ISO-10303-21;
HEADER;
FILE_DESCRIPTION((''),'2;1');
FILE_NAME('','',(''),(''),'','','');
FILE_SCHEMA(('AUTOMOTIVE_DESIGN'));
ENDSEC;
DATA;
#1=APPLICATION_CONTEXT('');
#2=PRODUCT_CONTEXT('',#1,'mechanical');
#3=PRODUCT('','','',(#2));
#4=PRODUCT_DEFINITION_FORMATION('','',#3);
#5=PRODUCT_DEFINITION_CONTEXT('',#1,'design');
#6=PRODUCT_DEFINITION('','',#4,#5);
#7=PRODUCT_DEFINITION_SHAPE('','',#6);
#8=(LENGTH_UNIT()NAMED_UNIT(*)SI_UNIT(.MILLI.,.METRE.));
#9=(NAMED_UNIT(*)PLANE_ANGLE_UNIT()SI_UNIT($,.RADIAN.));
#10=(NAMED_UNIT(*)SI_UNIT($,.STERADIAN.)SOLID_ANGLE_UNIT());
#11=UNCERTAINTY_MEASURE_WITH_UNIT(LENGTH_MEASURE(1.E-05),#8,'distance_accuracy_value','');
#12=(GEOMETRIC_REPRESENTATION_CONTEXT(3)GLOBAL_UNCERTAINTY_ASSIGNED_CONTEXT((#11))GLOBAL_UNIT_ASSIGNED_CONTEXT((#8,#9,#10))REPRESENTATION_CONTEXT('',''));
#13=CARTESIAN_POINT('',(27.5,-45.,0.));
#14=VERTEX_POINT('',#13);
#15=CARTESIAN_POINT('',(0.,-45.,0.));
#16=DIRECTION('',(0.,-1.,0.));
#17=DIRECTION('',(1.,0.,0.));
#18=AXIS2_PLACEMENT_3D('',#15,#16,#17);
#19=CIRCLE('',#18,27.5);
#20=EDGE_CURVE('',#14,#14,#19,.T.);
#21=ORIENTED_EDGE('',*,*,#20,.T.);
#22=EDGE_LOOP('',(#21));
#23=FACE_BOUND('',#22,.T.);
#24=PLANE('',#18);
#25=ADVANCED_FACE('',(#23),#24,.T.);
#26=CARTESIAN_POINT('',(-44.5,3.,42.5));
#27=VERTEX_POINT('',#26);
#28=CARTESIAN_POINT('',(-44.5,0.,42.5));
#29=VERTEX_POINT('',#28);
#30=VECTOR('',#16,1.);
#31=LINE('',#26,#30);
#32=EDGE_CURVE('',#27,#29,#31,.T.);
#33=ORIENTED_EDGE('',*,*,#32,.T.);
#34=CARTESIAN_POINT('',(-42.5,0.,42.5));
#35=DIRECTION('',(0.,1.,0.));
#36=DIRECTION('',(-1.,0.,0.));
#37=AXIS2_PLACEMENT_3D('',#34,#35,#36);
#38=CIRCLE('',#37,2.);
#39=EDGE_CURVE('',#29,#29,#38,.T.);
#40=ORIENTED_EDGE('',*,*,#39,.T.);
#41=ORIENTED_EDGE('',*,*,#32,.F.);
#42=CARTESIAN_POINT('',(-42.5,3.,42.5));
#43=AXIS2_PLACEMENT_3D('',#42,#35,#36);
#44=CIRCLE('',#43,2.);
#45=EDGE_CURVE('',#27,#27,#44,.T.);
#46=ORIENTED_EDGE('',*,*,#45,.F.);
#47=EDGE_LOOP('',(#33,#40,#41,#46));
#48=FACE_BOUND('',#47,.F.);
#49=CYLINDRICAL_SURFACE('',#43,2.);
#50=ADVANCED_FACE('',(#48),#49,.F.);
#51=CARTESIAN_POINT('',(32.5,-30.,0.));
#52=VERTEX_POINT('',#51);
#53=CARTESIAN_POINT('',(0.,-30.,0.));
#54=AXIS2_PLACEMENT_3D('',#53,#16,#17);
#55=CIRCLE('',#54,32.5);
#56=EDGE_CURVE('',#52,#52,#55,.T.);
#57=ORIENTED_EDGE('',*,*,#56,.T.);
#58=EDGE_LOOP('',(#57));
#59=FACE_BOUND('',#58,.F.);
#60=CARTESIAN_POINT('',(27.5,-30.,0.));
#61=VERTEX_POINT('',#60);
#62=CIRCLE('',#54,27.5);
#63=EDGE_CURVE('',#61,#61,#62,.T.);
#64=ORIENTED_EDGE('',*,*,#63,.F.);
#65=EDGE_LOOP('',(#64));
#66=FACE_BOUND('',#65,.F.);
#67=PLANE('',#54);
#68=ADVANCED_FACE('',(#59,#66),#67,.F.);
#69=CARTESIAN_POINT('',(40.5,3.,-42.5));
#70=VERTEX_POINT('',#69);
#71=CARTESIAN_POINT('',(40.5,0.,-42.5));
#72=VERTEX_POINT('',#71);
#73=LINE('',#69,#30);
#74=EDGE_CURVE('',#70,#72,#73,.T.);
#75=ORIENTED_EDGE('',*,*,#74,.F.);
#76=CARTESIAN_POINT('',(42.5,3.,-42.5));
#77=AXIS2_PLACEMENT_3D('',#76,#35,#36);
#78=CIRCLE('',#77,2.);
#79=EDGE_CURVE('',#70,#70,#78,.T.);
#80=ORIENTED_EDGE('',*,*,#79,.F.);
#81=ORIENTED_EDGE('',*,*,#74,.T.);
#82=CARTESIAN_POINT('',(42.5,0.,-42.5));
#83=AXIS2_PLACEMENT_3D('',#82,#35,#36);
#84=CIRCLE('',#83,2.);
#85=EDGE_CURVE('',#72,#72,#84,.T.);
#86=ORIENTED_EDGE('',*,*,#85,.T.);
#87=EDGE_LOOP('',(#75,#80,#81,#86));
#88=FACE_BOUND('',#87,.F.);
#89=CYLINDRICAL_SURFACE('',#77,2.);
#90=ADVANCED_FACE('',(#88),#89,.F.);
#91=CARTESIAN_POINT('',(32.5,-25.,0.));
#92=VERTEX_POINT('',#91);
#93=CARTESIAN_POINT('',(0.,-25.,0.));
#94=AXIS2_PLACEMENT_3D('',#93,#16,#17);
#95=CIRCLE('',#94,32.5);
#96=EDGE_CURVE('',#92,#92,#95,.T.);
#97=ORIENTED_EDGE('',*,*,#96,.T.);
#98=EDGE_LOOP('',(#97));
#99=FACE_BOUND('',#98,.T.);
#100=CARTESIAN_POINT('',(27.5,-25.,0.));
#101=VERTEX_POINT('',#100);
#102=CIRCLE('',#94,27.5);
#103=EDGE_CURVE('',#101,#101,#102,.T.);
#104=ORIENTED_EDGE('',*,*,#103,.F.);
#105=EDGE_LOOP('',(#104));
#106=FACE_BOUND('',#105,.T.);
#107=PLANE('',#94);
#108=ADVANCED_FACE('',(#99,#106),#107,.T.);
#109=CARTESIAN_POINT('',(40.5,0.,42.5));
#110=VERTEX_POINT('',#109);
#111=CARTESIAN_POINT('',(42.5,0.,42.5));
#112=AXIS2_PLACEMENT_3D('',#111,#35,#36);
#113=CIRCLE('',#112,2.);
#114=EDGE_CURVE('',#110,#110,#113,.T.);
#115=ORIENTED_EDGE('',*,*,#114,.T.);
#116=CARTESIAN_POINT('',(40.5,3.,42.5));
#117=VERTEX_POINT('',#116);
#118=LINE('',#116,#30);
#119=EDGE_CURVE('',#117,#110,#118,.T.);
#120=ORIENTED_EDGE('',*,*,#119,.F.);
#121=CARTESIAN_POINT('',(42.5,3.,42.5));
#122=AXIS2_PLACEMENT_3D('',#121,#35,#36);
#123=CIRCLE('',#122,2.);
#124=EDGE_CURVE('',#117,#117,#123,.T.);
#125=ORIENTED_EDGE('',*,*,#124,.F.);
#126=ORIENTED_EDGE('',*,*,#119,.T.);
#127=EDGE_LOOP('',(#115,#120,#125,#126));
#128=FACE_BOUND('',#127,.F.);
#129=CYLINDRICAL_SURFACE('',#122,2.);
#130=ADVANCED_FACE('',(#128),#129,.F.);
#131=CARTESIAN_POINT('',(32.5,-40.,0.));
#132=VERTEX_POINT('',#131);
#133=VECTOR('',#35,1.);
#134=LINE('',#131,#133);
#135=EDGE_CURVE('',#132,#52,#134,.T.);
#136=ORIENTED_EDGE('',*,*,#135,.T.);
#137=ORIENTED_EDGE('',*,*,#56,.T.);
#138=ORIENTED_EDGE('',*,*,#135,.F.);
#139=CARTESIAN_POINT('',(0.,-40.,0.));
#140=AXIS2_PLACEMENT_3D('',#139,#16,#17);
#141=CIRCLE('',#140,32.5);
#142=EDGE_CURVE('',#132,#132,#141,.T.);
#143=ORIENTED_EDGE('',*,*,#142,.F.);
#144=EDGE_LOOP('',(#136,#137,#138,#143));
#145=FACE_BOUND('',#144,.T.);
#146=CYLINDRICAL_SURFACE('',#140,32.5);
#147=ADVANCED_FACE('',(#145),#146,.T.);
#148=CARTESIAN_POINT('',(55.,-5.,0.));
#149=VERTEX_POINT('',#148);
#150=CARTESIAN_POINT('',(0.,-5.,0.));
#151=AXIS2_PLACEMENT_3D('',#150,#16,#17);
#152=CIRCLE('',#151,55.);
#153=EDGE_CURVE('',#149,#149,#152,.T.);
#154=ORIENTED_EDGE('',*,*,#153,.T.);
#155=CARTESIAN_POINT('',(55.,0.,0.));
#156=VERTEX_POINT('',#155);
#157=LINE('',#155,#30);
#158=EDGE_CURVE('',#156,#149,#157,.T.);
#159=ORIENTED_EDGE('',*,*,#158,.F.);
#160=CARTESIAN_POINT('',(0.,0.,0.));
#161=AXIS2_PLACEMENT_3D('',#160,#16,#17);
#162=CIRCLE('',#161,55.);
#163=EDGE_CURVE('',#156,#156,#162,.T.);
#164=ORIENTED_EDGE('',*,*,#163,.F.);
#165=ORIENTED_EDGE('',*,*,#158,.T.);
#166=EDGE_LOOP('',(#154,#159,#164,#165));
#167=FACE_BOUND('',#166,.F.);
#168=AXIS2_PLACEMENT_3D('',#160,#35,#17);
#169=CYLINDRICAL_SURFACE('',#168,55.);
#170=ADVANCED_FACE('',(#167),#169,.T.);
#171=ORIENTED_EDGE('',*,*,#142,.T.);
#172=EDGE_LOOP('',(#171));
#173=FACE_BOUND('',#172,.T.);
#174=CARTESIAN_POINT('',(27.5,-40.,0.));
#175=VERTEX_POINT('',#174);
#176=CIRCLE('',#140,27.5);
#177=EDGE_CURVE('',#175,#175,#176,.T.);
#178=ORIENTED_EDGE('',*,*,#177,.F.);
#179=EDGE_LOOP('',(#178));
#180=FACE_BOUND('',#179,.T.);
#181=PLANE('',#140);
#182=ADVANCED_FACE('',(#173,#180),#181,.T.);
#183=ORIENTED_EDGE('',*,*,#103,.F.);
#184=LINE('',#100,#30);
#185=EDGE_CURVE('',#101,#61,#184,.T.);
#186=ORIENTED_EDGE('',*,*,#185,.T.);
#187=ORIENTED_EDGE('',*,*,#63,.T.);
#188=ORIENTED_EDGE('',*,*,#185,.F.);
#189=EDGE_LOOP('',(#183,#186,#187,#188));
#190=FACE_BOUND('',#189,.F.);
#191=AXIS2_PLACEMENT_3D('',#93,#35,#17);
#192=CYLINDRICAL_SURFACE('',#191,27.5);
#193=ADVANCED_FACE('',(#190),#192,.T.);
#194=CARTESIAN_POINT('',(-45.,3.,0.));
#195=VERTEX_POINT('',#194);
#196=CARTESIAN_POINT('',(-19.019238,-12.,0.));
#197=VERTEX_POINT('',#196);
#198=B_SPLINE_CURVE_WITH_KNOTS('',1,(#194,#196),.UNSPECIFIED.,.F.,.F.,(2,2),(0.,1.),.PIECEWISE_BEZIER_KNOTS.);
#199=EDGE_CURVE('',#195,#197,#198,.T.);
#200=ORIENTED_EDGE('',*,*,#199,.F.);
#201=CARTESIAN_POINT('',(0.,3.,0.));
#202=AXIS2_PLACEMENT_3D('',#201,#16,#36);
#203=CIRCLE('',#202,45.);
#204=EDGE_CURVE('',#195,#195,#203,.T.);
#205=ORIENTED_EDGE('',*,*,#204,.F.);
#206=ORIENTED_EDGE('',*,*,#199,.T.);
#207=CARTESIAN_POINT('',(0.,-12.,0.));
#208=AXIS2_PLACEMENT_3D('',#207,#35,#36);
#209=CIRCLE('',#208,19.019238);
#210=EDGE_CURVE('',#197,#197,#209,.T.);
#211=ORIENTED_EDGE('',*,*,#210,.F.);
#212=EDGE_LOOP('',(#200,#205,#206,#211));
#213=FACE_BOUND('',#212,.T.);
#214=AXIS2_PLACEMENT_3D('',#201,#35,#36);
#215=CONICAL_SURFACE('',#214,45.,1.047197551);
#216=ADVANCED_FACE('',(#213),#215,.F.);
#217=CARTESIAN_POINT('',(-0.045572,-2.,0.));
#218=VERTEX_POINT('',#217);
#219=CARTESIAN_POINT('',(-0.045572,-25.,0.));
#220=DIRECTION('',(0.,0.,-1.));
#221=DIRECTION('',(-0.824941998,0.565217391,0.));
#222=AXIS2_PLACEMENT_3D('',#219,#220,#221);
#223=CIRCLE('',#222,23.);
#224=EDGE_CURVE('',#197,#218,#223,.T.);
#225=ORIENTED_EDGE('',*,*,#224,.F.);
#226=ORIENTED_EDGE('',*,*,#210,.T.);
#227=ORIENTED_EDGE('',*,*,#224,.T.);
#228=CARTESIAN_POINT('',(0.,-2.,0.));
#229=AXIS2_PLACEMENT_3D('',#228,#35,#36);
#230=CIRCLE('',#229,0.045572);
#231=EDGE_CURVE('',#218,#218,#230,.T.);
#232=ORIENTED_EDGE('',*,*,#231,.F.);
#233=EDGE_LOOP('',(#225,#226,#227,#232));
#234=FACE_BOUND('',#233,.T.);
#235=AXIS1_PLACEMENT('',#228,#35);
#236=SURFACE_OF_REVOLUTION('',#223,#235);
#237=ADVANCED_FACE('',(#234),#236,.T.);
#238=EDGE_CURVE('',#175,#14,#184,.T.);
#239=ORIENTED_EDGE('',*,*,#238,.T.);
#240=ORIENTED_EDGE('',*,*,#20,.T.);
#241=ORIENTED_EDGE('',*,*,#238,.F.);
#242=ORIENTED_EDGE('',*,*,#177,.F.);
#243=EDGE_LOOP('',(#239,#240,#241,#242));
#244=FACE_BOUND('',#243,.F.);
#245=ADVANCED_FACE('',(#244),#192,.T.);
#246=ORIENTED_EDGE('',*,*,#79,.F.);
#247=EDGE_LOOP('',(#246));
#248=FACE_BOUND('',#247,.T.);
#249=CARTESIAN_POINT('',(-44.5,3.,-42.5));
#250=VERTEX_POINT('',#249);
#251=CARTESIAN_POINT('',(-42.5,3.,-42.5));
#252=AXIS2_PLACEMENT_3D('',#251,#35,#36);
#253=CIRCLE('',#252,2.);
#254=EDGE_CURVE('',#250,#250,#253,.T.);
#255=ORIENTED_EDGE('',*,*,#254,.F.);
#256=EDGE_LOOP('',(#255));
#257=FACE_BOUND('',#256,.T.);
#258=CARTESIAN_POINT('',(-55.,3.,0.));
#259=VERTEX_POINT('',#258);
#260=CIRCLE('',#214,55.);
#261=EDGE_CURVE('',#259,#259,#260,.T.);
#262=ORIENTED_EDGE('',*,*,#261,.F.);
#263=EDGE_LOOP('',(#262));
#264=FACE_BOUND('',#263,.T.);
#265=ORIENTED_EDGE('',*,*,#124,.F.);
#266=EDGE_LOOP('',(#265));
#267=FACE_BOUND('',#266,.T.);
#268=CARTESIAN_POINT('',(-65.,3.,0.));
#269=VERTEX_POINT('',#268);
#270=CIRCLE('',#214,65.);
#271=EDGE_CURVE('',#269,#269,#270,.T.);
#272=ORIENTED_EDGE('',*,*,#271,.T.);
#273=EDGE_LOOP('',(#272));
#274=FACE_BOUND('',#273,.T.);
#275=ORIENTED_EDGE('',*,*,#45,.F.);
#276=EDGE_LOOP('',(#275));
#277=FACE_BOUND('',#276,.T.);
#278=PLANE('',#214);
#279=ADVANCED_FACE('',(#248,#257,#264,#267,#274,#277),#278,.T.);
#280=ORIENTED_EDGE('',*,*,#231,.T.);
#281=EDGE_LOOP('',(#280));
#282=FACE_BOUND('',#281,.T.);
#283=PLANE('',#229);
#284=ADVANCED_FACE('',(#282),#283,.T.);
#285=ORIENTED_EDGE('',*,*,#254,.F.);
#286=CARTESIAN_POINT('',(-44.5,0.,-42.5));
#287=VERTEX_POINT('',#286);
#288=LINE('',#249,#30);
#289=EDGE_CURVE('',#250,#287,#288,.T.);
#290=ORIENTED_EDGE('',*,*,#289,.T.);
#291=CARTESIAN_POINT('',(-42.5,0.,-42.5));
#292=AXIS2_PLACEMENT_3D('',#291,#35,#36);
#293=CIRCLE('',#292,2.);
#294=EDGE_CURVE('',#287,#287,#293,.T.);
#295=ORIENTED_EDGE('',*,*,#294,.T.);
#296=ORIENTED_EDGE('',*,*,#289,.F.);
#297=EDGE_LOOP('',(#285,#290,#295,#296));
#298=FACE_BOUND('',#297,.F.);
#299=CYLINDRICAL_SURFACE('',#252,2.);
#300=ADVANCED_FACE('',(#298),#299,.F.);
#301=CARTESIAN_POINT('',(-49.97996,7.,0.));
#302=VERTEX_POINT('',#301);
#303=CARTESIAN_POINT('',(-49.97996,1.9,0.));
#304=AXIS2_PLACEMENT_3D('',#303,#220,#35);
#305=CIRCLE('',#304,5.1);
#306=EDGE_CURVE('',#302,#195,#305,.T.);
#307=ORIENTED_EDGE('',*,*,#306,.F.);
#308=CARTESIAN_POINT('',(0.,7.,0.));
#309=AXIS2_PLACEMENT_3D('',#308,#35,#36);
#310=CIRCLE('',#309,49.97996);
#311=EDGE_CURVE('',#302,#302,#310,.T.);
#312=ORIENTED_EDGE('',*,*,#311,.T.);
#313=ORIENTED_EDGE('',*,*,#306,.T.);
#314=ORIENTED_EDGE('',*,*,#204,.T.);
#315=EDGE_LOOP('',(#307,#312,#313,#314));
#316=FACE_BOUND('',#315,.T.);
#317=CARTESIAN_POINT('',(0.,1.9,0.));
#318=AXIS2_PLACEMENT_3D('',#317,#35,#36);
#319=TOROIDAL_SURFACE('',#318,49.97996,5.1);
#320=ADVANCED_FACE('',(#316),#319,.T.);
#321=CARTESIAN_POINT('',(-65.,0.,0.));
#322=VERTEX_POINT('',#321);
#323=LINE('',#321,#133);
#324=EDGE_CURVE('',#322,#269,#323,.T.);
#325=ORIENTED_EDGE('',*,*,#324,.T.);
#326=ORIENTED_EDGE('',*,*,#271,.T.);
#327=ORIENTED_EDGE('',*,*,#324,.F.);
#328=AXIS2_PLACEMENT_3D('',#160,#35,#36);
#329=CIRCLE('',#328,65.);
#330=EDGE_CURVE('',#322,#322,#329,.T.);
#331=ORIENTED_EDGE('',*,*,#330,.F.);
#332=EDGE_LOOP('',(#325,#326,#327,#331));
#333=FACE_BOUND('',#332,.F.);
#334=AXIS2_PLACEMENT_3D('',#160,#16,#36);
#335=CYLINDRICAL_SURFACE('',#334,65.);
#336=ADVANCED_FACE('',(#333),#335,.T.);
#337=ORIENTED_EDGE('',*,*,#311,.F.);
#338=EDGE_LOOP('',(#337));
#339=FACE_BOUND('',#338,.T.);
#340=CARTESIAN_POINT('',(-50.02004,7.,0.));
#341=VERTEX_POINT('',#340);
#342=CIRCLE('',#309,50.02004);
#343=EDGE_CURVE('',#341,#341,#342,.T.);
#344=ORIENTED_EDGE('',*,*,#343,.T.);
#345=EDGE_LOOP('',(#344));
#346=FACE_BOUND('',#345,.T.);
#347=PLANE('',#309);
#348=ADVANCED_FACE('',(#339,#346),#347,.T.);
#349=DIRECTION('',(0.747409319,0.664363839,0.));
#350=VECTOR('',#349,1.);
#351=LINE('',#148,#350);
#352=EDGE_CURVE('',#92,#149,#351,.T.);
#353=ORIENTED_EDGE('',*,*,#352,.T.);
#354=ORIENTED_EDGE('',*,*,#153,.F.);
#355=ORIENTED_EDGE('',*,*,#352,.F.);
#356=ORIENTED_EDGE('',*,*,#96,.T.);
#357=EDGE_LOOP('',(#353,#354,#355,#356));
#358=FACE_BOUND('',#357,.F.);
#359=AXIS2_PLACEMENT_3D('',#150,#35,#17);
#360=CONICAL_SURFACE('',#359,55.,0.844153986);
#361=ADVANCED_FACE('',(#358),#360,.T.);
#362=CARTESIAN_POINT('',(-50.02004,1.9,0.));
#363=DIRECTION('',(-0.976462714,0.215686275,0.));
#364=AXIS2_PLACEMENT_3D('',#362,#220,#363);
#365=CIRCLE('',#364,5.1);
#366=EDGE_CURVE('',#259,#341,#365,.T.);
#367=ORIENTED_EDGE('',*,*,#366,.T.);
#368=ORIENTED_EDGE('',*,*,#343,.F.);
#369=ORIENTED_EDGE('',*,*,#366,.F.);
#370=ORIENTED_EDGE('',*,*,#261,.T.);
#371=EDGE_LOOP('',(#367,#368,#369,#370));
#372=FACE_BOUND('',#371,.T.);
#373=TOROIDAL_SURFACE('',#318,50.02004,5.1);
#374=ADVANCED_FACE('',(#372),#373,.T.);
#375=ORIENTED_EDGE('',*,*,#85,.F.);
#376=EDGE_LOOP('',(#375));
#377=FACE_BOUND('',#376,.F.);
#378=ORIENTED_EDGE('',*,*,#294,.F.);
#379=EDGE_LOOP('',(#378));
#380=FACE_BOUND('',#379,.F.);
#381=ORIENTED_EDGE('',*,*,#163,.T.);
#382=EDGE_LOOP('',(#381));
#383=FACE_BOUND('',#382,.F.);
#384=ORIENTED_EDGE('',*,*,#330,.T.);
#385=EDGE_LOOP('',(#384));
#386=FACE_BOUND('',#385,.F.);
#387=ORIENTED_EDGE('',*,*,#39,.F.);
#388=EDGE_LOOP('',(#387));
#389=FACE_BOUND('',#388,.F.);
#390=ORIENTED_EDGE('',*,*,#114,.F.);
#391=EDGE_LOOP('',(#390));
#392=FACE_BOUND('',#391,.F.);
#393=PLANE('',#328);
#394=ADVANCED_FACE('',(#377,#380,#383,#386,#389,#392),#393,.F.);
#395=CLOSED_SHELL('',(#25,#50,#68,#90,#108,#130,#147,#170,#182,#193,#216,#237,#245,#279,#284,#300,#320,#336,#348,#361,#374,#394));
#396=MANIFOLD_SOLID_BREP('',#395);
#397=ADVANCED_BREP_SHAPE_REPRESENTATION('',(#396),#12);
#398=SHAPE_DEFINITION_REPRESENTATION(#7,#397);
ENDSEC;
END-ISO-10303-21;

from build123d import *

# Parameters (mm, degrees)
F0_R      = 55
F1_DEPTH  = 25
F2_SIZE2  = 20
F2_SIZE   = 22.5
F3_R      = 27.5
F4_DEPTH  = 20
F6_START  = -5
F5_R      = 32.5
F5_R_2    = 27.5
F6_DEPTH  = 10
F7_R      = 65
F8_DEPTH  = 3
F9_R      = 2
F10_DEPTH = 25
F11_R     = 45
F12_DEPTH = 15
F12_TAPER = 60
F13_DEPTH = 10
F15_R     = 55
F15_R_2   = 45
F16_DEPTH = 4


# Not quite as in the source:
# - a fillet or chamfer that OpenCascade refuses, or shapes differently, is made with other operations: its cross-section is extruded or revolved along the edge and cut away or added


with BuildPart() as f1:
    # F0 (on Front) → F1 (new body)
    with BuildSketch(Plane.XZ):
        Circle(F0_R)
    extrude(amount=F1_DEPTH)

    # F2
    f2_edges = [f1.edges().sort_by_distance(p)[0] for p in [
        (-55, -25, 0),
    ]]
    f2_side = f1.faces().sort_by_distance((0, -25, 0))[0]
    chamfer(f2_edges, length=F2_SIZE, length2=F2_SIZE2, reference=f2_side)

    # F3 (on face) → F4 (join)
    with BuildSketch(Plane.XZ.offset(25)):
        Circle(F3_R)
    extrude(amount=F4_DEPTH)

    # F5 (on face) → F6 (join)
    with BuildSketch(Plane.XZ.offset(45).offset(F6_START)):
        Circle(F5_R)
        Circle(F5_R_2, mode=Mode.SUBTRACT)
    extrude(amount=-F6_DEPTH)

    # F7 (on face) → F8 (join)
    with BuildSketch(Plane(origin=(0, 0, 0), x_dir=(-1, 0, 0), z_dir=(0, 1, 0))):
        Circle(F7_R)
    extrude(amount=F8_DEPTH)

    # F9 (on face) → F10 (cut)
    with BuildSketch(Plane(origin=(0, 3, 0), x_dir=(-1, 0, 0), z_dir=(0, 1, 0))):
        with Locations((-42.5, 42.5)):
            Circle(F9_R)
        with Locations((42.5, 42.5)):
            Circle(F9_R)
        with Locations((42.5, -42.5)):
            Circle(F9_R)
        with Locations((-42.5, -42.5)):
            Circle(F9_R)
    extrude(amount=-F10_DEPTH, mode=Mode.SUBTRACT)

    # F11 (on face) → F12 (cut)
    with BuildSketch(Plane(origin=(0, 3, 0), x_dir=(-1, 0, 0), z_dir=(0, 1, 0))):
        Circle(F11_R)
    extrude(amount=-F12_DEPTH, taper=F12_TAPER, mode=Mode.SUBTRACT)

    # F13 (add): a face of the model
    f13_faces = [f1.faces().sort_by_distance(p)[0] for p in [
        (0, -12, 0),
    ]]
    extrude(f13_faces, amount=F13_DEPTH)

    # F14: fillet of radius 23 on 1 edges, made by hand

    # F14_s1 → F14_t2 (revolve, cut)
    with BuildSketch(Plane.XY):
        with BuildLine():
            ThreePointArc((-19.0192378865, -12), (-10.7693772202, -4.6530100506), (-0.0455719255, -2))
            Line((-0.0455719255, -2), (-19.0192378865, -2))
            Line((-19.0192378865, -2), (-19.0192378865, -12))
        make_face()
    revolve(axis=Axis((0, -2, 0), (0, 1, 0)), mode=Mode.SUBTRACT)

    # F15 (on face) → F16 (join)
    with BuildSketch(Plane(origin=(0, 3, 0), x_dir=(-1, 0, 0), z_dir=(0, 1, 0))):
        Circle(F15_R)
        Circle(F15_R_2, mode=Mode.SUBTRACT)
    extrude(amount=F16_DEPTH)

    # F17: fillet of radius 5.1 on 2 edges, made by hand

    # F17_s1 → F17_t2 (revolve, cut)
    with BuildSketch(Plane.XY):
        with BuildLine():
            ThreePointArc((-55, 3), (-53.2137840453, 5.8761790704), (-50.0200401608, 7))
            Line((-50.0200401608, 7), (-55, 7))
            Line((-55, 7), (-55, 3))
        make_face()
    revolve(axis=Axis((0, 7, 0), (0, 1, 0)), mode=Mode.SUBTRACT)

    # F17_s3 → F17_t4 (revolve, cut)
    with BuildSketch(Plane.XY):
        with BuildLine():
            ThreePointArc((-49.9799598392, 7), (-46.7862159547, 5.8761790704), (-45, 3))
            Line((-45, 3), (-45, 7))
            Line((-45, 7), (-49.9799598392, 7))
        make_face()
    revolve(axis=Axis((0, 7, 0), (0, 1, 0)), mode=Mode.SUBTRACT)


solid = f1.part
